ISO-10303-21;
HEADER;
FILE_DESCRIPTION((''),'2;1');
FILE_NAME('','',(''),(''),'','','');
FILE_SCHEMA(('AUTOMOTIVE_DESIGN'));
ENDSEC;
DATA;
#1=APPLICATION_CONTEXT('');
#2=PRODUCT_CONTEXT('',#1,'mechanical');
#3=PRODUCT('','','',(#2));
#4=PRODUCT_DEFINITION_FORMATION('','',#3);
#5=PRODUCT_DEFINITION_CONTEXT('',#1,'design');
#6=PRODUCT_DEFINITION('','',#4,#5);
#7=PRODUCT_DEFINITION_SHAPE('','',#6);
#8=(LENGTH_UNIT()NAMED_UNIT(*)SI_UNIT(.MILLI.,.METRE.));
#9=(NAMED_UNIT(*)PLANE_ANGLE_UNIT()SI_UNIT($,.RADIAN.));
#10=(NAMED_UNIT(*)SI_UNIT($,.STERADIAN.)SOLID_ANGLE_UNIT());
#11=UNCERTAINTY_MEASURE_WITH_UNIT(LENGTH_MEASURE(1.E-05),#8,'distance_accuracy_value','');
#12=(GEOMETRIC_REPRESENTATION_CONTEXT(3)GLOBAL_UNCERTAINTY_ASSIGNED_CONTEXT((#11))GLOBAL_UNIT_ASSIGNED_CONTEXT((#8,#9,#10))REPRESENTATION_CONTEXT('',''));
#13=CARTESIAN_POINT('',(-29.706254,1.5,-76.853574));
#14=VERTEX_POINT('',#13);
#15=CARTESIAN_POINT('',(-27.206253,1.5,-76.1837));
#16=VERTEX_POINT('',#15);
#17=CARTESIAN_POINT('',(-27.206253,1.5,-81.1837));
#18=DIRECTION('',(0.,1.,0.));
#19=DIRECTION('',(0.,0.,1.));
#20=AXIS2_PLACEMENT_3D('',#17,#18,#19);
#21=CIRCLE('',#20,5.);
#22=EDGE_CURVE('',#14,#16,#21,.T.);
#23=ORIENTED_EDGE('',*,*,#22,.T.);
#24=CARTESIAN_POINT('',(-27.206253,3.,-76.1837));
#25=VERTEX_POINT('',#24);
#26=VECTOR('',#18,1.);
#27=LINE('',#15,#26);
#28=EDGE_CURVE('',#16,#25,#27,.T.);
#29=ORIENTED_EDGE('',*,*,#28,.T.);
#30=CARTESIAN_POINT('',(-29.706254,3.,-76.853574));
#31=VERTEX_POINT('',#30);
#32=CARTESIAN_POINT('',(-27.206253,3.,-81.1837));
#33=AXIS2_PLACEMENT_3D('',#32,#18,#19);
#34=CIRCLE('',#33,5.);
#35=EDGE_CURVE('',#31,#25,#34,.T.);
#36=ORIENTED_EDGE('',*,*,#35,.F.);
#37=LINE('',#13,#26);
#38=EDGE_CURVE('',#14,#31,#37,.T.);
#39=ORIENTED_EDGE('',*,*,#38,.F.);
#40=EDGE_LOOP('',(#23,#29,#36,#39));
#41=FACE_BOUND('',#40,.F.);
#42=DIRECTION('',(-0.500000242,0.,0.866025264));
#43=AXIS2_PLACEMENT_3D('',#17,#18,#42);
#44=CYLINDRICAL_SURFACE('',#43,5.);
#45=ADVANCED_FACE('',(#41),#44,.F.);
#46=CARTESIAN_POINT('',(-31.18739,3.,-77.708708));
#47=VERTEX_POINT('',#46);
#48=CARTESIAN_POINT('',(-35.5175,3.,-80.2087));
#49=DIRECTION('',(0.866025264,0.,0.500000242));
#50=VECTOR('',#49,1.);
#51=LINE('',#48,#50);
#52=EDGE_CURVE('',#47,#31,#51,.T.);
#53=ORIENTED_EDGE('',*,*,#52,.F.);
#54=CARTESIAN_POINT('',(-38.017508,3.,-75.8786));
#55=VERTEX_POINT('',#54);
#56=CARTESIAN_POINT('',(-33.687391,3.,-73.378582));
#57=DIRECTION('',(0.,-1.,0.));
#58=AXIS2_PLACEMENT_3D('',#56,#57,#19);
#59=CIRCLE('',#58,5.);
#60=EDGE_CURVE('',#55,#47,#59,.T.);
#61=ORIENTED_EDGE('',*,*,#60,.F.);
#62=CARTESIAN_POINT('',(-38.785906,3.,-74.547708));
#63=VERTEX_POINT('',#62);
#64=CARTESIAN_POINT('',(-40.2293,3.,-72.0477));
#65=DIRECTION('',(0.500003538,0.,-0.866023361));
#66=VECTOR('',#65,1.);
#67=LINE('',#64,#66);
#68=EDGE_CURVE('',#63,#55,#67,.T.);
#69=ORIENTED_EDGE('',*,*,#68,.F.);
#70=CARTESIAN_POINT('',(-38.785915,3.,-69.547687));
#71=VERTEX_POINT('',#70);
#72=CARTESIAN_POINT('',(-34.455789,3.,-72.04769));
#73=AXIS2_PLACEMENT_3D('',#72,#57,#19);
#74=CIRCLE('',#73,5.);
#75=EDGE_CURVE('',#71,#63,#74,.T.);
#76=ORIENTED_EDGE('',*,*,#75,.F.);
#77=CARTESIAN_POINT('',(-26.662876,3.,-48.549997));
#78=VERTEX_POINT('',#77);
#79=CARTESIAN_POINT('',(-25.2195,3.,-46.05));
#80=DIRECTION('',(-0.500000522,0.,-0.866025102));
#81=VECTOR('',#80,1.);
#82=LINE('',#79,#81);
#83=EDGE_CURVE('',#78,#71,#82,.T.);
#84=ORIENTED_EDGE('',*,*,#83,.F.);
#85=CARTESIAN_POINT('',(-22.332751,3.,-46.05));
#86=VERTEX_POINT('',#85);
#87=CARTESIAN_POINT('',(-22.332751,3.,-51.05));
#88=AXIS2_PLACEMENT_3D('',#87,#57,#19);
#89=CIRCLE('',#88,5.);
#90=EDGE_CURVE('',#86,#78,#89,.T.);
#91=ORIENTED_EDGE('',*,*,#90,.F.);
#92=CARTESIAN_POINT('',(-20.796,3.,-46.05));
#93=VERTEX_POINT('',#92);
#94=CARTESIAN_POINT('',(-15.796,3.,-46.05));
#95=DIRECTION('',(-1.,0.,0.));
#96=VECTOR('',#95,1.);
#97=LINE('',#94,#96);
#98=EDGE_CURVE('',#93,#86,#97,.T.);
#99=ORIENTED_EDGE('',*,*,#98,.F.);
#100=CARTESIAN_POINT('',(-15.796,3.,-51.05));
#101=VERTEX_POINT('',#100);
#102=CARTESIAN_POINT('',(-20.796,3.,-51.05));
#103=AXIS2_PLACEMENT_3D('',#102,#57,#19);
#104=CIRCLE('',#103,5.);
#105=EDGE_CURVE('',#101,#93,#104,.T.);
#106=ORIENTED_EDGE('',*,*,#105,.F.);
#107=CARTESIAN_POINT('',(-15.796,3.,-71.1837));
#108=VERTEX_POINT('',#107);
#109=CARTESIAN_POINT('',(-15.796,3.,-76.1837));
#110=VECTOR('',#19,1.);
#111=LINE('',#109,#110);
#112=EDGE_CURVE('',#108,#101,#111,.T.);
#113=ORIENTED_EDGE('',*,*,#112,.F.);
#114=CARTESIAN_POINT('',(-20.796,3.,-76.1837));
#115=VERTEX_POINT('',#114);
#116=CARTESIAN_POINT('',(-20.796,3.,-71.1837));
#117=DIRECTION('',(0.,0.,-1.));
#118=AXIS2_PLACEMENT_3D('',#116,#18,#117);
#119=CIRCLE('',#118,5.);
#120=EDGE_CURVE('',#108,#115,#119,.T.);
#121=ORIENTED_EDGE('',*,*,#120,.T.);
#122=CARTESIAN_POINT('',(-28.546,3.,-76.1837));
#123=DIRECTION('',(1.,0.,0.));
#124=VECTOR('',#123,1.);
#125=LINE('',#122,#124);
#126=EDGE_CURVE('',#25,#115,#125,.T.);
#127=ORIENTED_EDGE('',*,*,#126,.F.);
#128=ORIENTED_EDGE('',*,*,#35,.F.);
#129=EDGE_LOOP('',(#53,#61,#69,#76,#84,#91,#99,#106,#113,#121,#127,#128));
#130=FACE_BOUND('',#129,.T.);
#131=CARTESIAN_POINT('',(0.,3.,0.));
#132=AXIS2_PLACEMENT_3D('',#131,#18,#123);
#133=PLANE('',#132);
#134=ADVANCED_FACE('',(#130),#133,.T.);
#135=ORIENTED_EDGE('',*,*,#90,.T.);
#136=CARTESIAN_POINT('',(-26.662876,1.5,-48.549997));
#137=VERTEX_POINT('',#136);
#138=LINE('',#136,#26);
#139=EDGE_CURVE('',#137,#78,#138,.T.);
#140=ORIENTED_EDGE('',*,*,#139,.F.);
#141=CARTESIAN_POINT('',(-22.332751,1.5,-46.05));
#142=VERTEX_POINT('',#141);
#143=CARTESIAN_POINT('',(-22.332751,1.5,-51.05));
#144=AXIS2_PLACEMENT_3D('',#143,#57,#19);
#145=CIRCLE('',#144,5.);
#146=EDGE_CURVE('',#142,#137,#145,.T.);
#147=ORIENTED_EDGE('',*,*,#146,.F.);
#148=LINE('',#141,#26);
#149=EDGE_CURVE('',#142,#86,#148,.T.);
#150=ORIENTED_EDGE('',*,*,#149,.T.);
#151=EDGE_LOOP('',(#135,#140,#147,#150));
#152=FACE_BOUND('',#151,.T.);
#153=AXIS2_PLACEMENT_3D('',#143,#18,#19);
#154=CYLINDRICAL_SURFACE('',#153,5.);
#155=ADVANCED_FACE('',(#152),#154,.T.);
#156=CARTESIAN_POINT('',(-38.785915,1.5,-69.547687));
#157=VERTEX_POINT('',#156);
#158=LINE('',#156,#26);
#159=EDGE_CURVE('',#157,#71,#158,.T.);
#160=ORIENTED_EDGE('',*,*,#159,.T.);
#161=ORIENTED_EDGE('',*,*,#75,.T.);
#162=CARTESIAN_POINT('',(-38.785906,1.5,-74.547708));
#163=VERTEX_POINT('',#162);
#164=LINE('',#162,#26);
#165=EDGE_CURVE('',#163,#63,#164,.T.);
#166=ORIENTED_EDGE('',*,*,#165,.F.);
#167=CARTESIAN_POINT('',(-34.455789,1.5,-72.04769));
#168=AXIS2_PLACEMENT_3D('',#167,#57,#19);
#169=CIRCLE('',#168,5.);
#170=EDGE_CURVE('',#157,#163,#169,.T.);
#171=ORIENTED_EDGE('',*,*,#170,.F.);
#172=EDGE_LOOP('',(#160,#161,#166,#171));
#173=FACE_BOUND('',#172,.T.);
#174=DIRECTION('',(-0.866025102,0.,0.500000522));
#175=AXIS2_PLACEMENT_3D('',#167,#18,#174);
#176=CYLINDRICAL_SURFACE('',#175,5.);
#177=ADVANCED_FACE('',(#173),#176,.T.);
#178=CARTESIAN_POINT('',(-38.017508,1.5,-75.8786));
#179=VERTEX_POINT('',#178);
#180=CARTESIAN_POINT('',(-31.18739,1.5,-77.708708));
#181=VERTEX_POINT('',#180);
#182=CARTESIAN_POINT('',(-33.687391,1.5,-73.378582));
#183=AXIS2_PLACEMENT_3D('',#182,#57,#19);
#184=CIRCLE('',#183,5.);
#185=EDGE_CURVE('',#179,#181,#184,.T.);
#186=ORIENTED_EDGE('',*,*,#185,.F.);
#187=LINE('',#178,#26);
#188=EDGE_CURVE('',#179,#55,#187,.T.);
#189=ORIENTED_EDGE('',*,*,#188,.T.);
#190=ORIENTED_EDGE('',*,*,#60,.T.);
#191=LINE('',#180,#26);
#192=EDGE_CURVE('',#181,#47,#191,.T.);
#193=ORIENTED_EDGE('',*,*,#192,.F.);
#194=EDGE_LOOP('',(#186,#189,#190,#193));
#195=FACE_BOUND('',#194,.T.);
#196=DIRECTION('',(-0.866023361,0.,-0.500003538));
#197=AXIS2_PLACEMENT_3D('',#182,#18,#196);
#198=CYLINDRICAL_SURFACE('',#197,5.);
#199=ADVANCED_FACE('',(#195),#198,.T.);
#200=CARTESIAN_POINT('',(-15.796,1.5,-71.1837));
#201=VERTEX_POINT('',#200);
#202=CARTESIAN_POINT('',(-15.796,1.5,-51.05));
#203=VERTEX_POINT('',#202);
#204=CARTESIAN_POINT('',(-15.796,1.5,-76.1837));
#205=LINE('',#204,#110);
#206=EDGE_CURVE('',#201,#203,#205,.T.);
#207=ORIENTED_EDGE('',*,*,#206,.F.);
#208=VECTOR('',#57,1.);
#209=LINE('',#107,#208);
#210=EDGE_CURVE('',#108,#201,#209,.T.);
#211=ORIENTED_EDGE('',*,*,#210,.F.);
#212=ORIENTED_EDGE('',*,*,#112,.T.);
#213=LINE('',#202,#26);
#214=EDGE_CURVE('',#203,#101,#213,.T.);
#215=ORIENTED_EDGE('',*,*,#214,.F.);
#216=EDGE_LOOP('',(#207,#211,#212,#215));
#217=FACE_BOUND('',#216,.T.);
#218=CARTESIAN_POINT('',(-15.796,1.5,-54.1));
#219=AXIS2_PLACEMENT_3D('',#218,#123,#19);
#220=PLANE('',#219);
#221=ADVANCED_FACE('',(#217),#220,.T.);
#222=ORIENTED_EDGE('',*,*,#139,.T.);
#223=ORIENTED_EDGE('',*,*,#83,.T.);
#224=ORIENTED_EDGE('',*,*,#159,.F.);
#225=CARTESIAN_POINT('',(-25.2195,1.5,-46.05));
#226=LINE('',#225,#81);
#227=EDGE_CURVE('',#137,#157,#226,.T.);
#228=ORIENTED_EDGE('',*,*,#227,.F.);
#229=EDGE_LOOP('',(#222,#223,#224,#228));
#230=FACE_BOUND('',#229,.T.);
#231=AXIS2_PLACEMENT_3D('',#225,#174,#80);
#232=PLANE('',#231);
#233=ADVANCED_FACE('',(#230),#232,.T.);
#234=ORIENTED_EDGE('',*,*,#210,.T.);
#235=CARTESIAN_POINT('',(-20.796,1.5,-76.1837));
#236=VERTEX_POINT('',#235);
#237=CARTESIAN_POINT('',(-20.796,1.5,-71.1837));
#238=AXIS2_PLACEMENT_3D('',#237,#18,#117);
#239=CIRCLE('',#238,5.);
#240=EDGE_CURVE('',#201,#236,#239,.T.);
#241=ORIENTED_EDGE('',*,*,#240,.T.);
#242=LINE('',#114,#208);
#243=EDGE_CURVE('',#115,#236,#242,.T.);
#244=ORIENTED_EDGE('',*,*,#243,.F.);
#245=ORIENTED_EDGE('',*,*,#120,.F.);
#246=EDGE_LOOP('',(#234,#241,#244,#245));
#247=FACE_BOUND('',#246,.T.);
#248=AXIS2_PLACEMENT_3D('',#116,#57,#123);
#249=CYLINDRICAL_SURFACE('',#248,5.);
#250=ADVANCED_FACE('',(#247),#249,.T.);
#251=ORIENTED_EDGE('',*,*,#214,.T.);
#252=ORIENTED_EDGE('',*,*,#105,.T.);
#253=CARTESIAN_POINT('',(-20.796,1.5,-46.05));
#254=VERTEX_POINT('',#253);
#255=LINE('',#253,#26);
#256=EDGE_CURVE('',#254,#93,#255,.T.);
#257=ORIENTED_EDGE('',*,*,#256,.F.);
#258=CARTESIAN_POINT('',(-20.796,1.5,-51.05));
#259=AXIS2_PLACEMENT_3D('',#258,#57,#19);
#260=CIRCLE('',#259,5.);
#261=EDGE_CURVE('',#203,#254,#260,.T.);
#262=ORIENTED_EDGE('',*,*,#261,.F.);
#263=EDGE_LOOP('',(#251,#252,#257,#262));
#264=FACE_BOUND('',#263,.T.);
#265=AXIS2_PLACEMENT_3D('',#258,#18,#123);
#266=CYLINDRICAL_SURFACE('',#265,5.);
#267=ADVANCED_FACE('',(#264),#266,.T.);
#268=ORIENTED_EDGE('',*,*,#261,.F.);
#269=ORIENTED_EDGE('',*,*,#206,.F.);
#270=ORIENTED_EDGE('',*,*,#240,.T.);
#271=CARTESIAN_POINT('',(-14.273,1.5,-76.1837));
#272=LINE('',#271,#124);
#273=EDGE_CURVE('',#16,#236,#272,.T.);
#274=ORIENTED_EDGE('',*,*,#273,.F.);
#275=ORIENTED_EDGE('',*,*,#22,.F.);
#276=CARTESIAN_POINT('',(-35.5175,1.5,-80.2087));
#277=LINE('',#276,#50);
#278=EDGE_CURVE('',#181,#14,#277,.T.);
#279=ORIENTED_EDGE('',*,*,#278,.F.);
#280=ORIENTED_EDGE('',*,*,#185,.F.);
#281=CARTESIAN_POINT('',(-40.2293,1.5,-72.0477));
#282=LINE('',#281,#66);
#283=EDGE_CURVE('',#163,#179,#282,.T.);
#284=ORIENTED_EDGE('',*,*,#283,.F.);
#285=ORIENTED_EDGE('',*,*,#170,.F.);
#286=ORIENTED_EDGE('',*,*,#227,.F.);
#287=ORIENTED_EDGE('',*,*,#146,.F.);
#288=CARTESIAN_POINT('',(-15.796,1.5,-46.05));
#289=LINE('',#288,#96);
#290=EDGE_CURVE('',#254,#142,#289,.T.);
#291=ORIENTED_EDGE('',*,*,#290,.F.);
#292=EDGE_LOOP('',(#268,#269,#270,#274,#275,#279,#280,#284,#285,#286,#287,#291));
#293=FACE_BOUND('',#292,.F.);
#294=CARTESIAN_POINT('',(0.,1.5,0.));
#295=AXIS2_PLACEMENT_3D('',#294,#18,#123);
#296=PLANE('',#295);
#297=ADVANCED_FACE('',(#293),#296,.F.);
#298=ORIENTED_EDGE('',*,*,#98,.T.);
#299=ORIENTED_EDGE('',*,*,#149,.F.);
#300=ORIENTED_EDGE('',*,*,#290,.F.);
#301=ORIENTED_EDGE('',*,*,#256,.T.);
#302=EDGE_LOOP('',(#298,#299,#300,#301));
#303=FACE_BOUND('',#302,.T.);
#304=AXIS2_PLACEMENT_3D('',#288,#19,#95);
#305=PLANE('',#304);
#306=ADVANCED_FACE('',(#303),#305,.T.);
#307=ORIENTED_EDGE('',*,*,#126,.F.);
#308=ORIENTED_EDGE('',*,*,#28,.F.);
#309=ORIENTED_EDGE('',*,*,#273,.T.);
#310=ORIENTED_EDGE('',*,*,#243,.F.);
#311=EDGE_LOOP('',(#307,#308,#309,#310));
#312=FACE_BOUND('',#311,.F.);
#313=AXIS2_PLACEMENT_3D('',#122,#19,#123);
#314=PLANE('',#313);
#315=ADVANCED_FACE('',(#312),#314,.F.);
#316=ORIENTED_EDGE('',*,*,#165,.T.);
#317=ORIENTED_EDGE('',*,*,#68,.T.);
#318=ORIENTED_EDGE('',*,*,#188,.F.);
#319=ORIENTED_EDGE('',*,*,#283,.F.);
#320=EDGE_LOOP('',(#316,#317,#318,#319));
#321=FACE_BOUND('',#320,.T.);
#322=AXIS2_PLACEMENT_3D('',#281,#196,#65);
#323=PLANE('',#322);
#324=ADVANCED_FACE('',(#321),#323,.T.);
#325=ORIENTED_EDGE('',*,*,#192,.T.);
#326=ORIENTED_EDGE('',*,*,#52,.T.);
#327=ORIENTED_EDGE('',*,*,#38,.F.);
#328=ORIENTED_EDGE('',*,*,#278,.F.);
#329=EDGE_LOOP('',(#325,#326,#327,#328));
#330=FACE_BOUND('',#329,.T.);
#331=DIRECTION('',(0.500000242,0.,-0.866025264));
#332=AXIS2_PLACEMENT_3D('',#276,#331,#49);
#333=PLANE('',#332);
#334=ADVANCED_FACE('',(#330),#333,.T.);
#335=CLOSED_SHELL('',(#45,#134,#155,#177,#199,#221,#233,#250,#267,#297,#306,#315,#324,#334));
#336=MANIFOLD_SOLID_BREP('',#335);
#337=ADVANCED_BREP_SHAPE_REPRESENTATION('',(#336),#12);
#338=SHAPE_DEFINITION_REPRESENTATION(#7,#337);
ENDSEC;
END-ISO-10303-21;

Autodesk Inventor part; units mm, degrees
ref_plane "YZ Plane" through (0, 0, 0) normal (1, 0, 0) x (0, 1, 0)
ref_plane "XZ Plane" through (0, 0, 0) normal (0, 1, 0) x (-1, 0, 0)
ref_plane "XY Plane" through (0, 0, 0) normal (0, 0, 1) x (1, 0, 0)
sketch "スケッチ1" plane through (0, 0, 0) normal (0, 1, 0) x (-1, 0, 0)
  line L0 (75, 0) -> (105, -51.9615)
  line L1 (-75, 0) -> (-105, -51.9615)
  line L2 (0, -218.2384) -> (0, 36.3731)
  line L3 (147, 0) -> (-147, 0)
  line L4 (37.5, -27) -> (-37.5, -27)
  line L5 (105, -51.9615) -> (30, -181.8653)
  line L6 (30, -181.8653) -> (-30, -181.8653)
  line L7 (-30, -181.8653) -> (-105, -51.9615)
  line L8 (75, 0) -> (-75, 0)
  line L9 (-25.3673, -135.8894) -> (-62.8673, -70.9375)
  line L10 (25.3673, -135.8894) -> (62.8673, -70.9375)
  line L11 (-37.5, -27) -> (-27.5, -27)
  line L12 (-27.5, -27) -> (-27.5, -39)
  line L13 (-27.5, -39) -> (-37.5, -39)
  line L14 (-37.5, -39) -> (-37.5, -27)
  line L15 (37.5, -27) -> (27.5, -27)
  line L16 (27.5, -27) -> (27.5, -39)
  line L17 (27.5, -39) -> (37.5, -39)
  line L18 (37.5, -39) -> (37.5, -27)
  line L19 (0, -77.9423) -> (44.1173, -103.4134) construction
  line L20 (0, -77.9423) -> (-44.1173, -103.4134) construction
  line L21 (-44.1173, -103.4134) -> (-67.5, -116.9134) construction
  line L22 (-57.8673, -79.5977) -> (-47.475, -73.5977)
  line L23 (-52.475, -64.9375) -> (-62.8673, -70.9375)
  line L24 (-62.8673, -70.9375) -> (-57.8673, -79.5977)
  line L25 (-47.475, -73.5977) -> (-52.475, -64.9375)
  line L26 (-25.3673, -135.8894) -> (-30.3673, -127.2291)
  line L27 (-19.975, -121.2291) -> (-14.975, -129.8894)
  line L28 (-14.975, -129.8894) -> (-25.3673, -135.8894)
  line L29 (-30.3673, -127.2291) -> (-19.975, -121.2291)
  line L30 (30.3673, -127.2291) -> (19.975, -121.2291)
  line L31 (14.975, -129.8894) -> (25.3673, -135.8894)
  line L32 (25.3673, -135.8894) -> (30.3673, -127.2291)
  line L33 (19.975, -121.2291) -> (14.975, -129.8894)
  line L34 (62.8673, -70.9375) -> (57.8673, -79.5977)
  line L35 (47.475, -73.5977) -> (52.475, -64.9375)
  line L36 (52.475, -64.9375) -> (62.8673, -70.9375)
  line L37 (57.8673, -79.5977) -> (47.475, -73.5977)
  line L38 (62.8673, -70.9375) -> (37.5, -27)
  line L39 (-37.5, -27) -> (-62.8673, -70.9375)
  line L40 (-25.3673, -135.8894) -> (25.3673, -135.8894)
  line L41 (-25.3673, -135.8894) -> (-25.3673, -181.8653)
  line L42 (25.3673, -135.8894) -> (25.3673, -181.8653)
  line L43 (-25.3673, -135.8894) -> (-48.75, -149.3894)
  line L44 (25.3673, -135.8894) -> (48.75, -149.3894)
  point P0 (0, 0)
  point P1 (0, 0)
  point P2 (0, -27)
  dimension "d1" = 150
  dimension "d2" = 60
  dimension "d3" = 60
  dimension "d4" = 27
  dimension "d5" = 75
  dimension "d6" = 60
  dimension "d7" = 27
  dimension "d8" = 10
  dimension "d9" = 12
  dimension "d10" = 10
  dimension "d11" = 12
  dimension "d14" = 360
extrude "プレート1" add sketch "スケッチ1" along normal blind 1.5 contours L5 L6 L42 L44 | L4 L16 L17 L18 L38 L36 L35 L37 L10 L30 L33 L31 L40 L2 | L2 L40 L28 L27 L29 L9 L22 L25 L23 L39 L14 L13 L12 L4 | L31 L33 L30 L10 | L42 L6 L2 L40 | L2 L6 L41 L40 | L4 L18 L17 L16 | L12 L13 L14 L4 | L9 L29 L27 L28 | L41 L6 L7 L43 | L37 L35 L36 L10 | L23 L25 L22 L9
sketch "スケッチ2" plane through (0, 0, 0) normal (0, -1, 0) x (1, 0, 0)
  line L0 (23.3798, -38.55) -> (-23.3798, -38.55) projected
  line L1 (8.2, -46.6) -> (-8.2, -46.6) projected
  arc A0 (-21.1, -27) -> (-23.3798, -38.55) centre (-21.1, -33) ccw projected
  line L2 (-27.5, -27) -> (-27.5, -39) projected
  line L3 (27.5, -39) -> (27.5, -27) projected
  line L4 (-27.5, -39) -> (-27.5, -40.55)
  line L5 (-27.5, -40.55) -> (-10.2, -40.55)
  line L6 (-10.2, -40.55) -> (-10.2, -48.6)
  line L7 (-10.2, -48.6) -> (10.2, -48.6)
  line L8 (10.2, -48.6) -> (10.2, -40.55)
  line L9 (10.2, -40.55) -> (27.5, -40.55)
  line L10 (27.5, -40.55) -> (27.5, -39)
  line L11 (-37.5, -27) -> (-27.5, -27) projected
  line L12 (-37.5, -27) -> (37.5, -27) projected
  line L13 (-20.3112, -101.4469) -> (-30.5112, -83.78)
  line L14 (-27.2827, -105.4719) -> (-20.3112, -101.4469)
  line L15 (-18.6327, -120.4541) -> (-27.2827, -105.4719)
  line L16 (-19.975, -121.2291) -> (-18.6327, -120.4541)
  line L17 (-37.4827, -87.805) -> (-46.1327, -72.8227)
  line L18 (-46.1327, -72.8227) -> (-47.475, -73.5977)
  line L19 (-30.5112, -83.78) -> (-37.4827, -87.805)
  line L20 (30.5112, -83.78) -> (20.3112, -101.4469)
  line L21 (37.4827, -87.805) -> (30.5112, -83.78)
  line L22 (46.1327, -72.8227) -> (37.4827, -87.805)
  line L23 (47.475, -73.5977) -> (46.1327, -72.8227)
  line L24 (27.2827, -105.4719) -> (18.6327, -120.4541)
  line L25 (18.6327, -120.4541) -> (19.975, -121.2291)
  line L26 (20.3112, -101.4469) -> (27.2827, -105.4719)
  line L27 (-47.475, -73.5977) -> (-57.8673, -79.5977)
  line L28 (-57.8673, -79.5977) -> (-30.3673, -127.2291)
  line L29 (-30.3673, -127.2291) -> (-19.975, -121.2291)
  line L30 (19.975, -121.2291) -> (30.3673, -127.2291)
  line L31 (30.3673, -127.2291) -> (57.8673, -79.5977)
  line L32 (57.8673, -79.5977) -> (47.475, -73.5977)
  point P0 (0, 0)
  point P1 (0, -77.9423)
  point P2 (-23.0432, -100.7148)
  point P3 (-33.5673, -121.6866)
  point P4 (-22.4248, -117.8859)
  point P5 (-25.3673, -135.8894)
  point P6 (-28.3712, -118.6866)
  point P7 (-31.2432, -86.512)
  point P8 (-45.8046, -77.3909)
  point P9 (-62.8673, -70.9375)
  point P10 (31.2432, -86.512)
  point P11 (54.6673, -85.1403)
  point P12 (45.8046, -77.3909)
  point P13 (62.8673, -70.9375)
  point P14 (49.4712, -82.1403)
  point P15 (23.0432, -100.7148)
  point P16 (22.4248, -117.8859)
  point P17 (25.3673, -135.8894)
  dimension "d17" = 2
  dimension "d18" = 2
  dimension "d19" = 2
  dimension "d20" = 2
  dimension "d26" = 360
extrude "切り取り1" cut sketch "スケッチ2" against normal blind 1.5
fillet "フィレット1" radius 1.5 18 edges at (-10.2, 0.75, -48.6) (-10.2, 0.75, -40.55) (-27.5, 0.75, -40.55) (10.2, 0.75, -48.6) (10.2, 0.75, -40.55) (27.5, 0.75, -40.55) (-30.5112, 0.75, -83.78) (-46.1327, 0.75, -72.8227) (-20.3112, 0.75, -101.4469) (-27.2827, 0.75, -105.4719) (-37.4827, 0.75, -87.805) (-18.6327, 0.75, -120.4541) (20.3112, 0.75, -101.4469) (27.2827, 0.75, -105.4719) (18.6327, 0.75, -120.4541) (30.5112, 0.75, -83.78) (37.4827, 0.75, -87.805) (46.1327, 0.75, -72.8227)
sketch "スケッチ3" plane through (0, 0, 0) normal (0, -1, 0) x (1, 0, 0)
  circle A0 centre (40.9875, -45.0405) radius 1.6 projected
  circle A1 centre (48.9875, -58.8969) radius 1.6 projected
  circle A2 centre (8, -129.8894) radius 1.6 projected
  circle A3 centre (-8, -129.8894) radius 1.6 projected
  circle A4 centre (-48.9875, -58.8969) radius 1.6 projected
  circle A5 centre (-40.9875, -45.0405) radius 1.6 projected
  point P0 (0, 0)
extrude "切り取り2" cut sketch "スケッチ3" against normal blind 1.5
sketch "スケッチ4" plane through (0, 0, 0) normal (0, -1, 0) x (1, 0, 0)
  circle A0 centre (10, -176.8653) radius 1.35 projected
  circle A1 centre (21.2333, -145.0496) radius 1.6 projected
  circle A2 centre (10, -143.8894) radius 1.6 projected
  line L0 (52.75, -142.4612) -> (30, -181.8653) projected
  line L1 (52.75, -142.4612) -> (33.6974, -131.4612) projected
  line L2 (33.6974, -131.4612) -> (27.1974, -142.7195) projected
  line L3 (27.1974, -142.7195) -> (20.5635, -138.8894) projected
  line L4 (20.5635, -138.8894) -> (5, -138.8894) projected
  line L5 (5, -138.8894) -> (5, -181.8653) projected
  line L6 (30, -181.8653) -> (5, -181.8653) projected
  circle A3 centre (-10, -176.8653) radius 1.35 projected
  circle A4 centre (-21.2333, -145.0496) radius 1.6 projected
  circle A5 centre (-10, -143.8894) radius 1.6 projected
  line L7 (-12.9295, -171.4323) -> (-35.4295, -132.4612) projected
  line L8 (-30.25, -181.4323) -> (-12.9295, -171.4323) projected
  line L9 (-30, -181.8653) -> (-30.25, -181.4323) projected
  line L10 (-30, -181.8653) -> (-5, -181.8653) projected
  line L11 (-5, -181.8653) -> (-5, -138.8894) projected
  line L12 (-5, -138.8894) -> (-20.5635, -138.8894) projected
  line L13 (-20.5635, -138.8894) -> (-27.1974, -142.7195) projected
  line L14 (-33.6974, -131.4612) -> (-27.1974, -142.7195) projected
  line L15 (-35.4295, -132.4612) -> (-33.6974, -131.4612) projected
  point P0 (0, 0)
extrude "切り取り3" cut sketch "スケッチ4" against normal blind 1.5 contours A0 | A1 | A2 | A3 | A4 | A5
sketch "スケッチ5" plane through (0, 1.5, 0) normal (0, 1, 0) x (1, 0, 0)
  line L0 (-19.975, 121.2291) -> (19.975, 121.2291) projected
  line L1 (47.475, 73.5977) -> (27.5, 39) projected
  line L2 (-47.475, 73.5977) -> (-27.5, 39) projected
  point P0 (0, 0)
sketch "スケッチ6" plane through (0, 1.5, 0) normal (0, 1, 0) x (1, 0, 0)
  line L0 (-26.0855, 44.55) -> (-41.9613, 72.0477)
  line L1 (-41.9613, 72.0477) -> (-36.0186, 82.3409)
  line L2 (-36.0186, 82.3409) -> (-29.0471, 78.3159)
  line L3 (-29.0471, 78.3159) -> (-14.8471, 102.911)
  line L4 (-14.8471, 102.911) -> (-21.8186, 106.936)
  line L5 (-21.8186, 106.936) -> (-15.8758, 117.2291)
  line L6 (-15.8758, 117.2291) -> (15.8758, 117.2291)
  line L7 (15.8758, 117.2291) -> (21.8186, 106.936)
  line L8 (21.8186, 106.936) -> (14.8471, 102.911)
  line L9 (14.8471, 102.911) -> (29.0471, 78.3159)
  line L10 (29.0471, 78.3159) -> (36.0186, 82.3409)
  line L11 (36.0186, 82.3409) -> (41.9613, 72.0477)
  line L12 (41.9613, 72.0477) -> (26.0855, 44.55)
  line L13 (26.0855, 44.55) -> (14.2, 44.55)
  line L14 (14.2, 44.55) -> (14.2, 52.6)
  line L15 (14.2, 52.6) -> (-14.2, 52.6)
  line L16 (-14.2, 52.6) -> (-14.2, 44.55)
  line L17 (-14.2, 44.55) -> (-26.0855, 44.55)
  line L18 (-47.475, 73.5977) -> (-27.5, 39) projected
  line L19 (-38.2327, 86.5059) -> (-45.3827, 74.1218) projected
  line L20 (-31.8102, 84.53) -> (-36.1836, 87.055) projected
  line L21 (-21.0612, 100.1479) -> (-29.7612, 85.079) projected
  line L22 (-25.9836, 104.7219) -> (-21.6102, 102.1969) projected
  line L23 (-19.3827, 119.1551) -> (-26.5327, 106.7709) projected
  line L24 (-19.975, 121.2291) -> (19.975, 121.2291) projected
  line L25 (47.475, 73.5977) -> (27.5, 39) projected
  line L26 (26.5327, 106.7709) -> (19.3827, 119.1551) projected
  line L27 (21.6102, 102.1969) -> (25.9836, 104.7219) projected
  line L28 (29.7612, 85.079) -> (21.0612, 100.1479) projected
  line L29 (36.1836, 87.055) -> (31.8102, 84.53) projected
  line L30 (45.3827, 74.1218) -> (38.2327, 86.5059) projected
  line L31 (11.7, 40.55) -> (26, 40.55) projected
  line L32 (10.2, 47.1) -> (10.2, 42.05) projected
  line L33 (-8.7, 48.6) -> (8.7, 48.6) projected
  line L34 (-10.2, 42.05) -> (-10.2, 47.1) projected
  line L35 (-26, 40.55) -> (-11.7, 40.55) projected
  line L36 (0, 48.6) -> (0, 121.2291)
  line L37 (-25.4112, 92.6134) -> (-31.0836, 95.8884) construction
  point P0 (0, 0)
  dimension "d32" = 4
  dimension "d33" = 4
  dimension "d34" = 4
  dimension "d35" = 4
  dimension "d36" = 4
  dimension "d37" = 4
  dimension "d38" = 4
  dimension "d39" = 4
  dimension "d40" = 4
extrude "切り取り4" cut sketch "スケッチ6" against normal blind 1.5
fillet "フィレット2" radius 5 9 edges at (-14.2, 0.75, -44.55) (-26.0855, 0.75, -44.55) (-41.9613, 0.75, -72.0477) (-36.0186, 0.75, -82.3409) (-21.8186, 0.75, -106.936) (-15.8758, 0.75, -117.2291) (-14.2, 0.75, -52.6) (-29.0471, 0.75, -78.3159) (-14.8471, 0.75, -102.911)
mirror "ミラー1" about plane through (0, 0, 0) normal (1, 0, 0) of "フィレット2"
sketch "スケッチ7" plane through (0, 1.5, 0) normal (0, 1, 0) x (1, 0, 0)
  arc A0 (18.2848, 105.0066) -> (17.2511, 98.7471) centre (21.5812, 101.2471) ccw projected
  line L0 (17.2511, 98.7471) -> (26.643, 82.4797) projected
  arc A1 (26.643, 82.4797) -> (32.5808, 80.2452) centre (30.9732, 84.9797) ccw projected
  arc A2 (38.5186, 78.0107) -> (32.5808, 80.2452) centre (34.1884, 75.5107) ccw projected
  line L1 (38.5186, 78.0107) -> (40.5179, 74.5477) projected
  arc A3 (40.5179, 69.5477) -> (40.5179, 74.5477) centre (36.1878, 72.0477) ccw projected
  line L2 (40.5179, 69.5477) -> (27.5289, 47.05) projected
  arc A4 (23.1987, 44.55) -> (27.5289, 47.05) centre (23.1987, 49.55) ccw projected
  line L3 (23.1987, 44.55) -> (19.2, 44.55) projected
  arc A5 (14.296, 48.575) -> (19.2, 44.55) centre (19.2, 49.55) ccw projected
  arc A6 (14.296, 48.575) -> (9.392, 52.6) centre (9.392, 47.6) ccw projected
  line L4 (9.392, 52.6) -> (-9.392, 52.6) projected
  arc A7 (-9.392, 52.6) -> (-14.296, 48.575) centre (-9.392, 47.6) ccw projected
  arc A8 (-19.2, 44.55) -> (-14.296, 48.575) centre (-19.2, 49.55) ccw projected
  line L5 (-19.2, 44.55) -> (-23.1987, 44.55) projected
  arc A9 (-27.5289, 47.05) -> (-23.1987, 44.55) centre (-23.1987, 49.55) ccw projected
  line L6 (-27.5289, 47.05) -> (-40.5179, 69.5477) projected
  arc A10 (-40.5179, 74.5477) -> (-40.5179, 69.5477) centre (-36.1878, 72.0477) ccw projected
  line L7 (-40.5179, 74.5477) -> (-38.5186, 78.0107) projected
  arc A11 (-32.5808, 80.2452) -> (-38.5186, 78.0107) centre (-34.1884, 75.5107) ccw projected
  arc A12 (-32.5808, 80.2452) -> (-26.643, 82.4797) centre (-30.9732, 84.9797) ccw projected
  line L8 (-26.643, 82.4797) -> (-17.2511, 98.7471) projected
  arc A13 (-17.2511, 98.7471) -> (-18.2848, 105.0066) centre (-21.5812, 101.2471) ccw projected
  arc A14 (-19.3186, 111.2661) -> (-18.2848, 105.0066) centre (-14.9884, 108.7661) ccw projected
  line L9 (-19.3186, 111.2661) -> (-17.3192, 114.7291) projected
  arc A15 (-12.9891, 117.2291) -> (-17.3192, 114.7291) centre (-12.9891, 112.2291) ccw projected
  line L10 (-12.9891, 117.2291) -> (12.9891, 117.2291) projected
  arc A16 (17.3192, 114.7291) -> (12.9891, 117.2291) centre (12.9891, 112.2291) ccw projected
  line L11 (17.3192, 114.7291) -> (19.3186, 111.2661) projected
  arc A17 (18.2848, 105.0066) -> (19.3186, 111.2661) centre (14.9884, 108.7661) ccw projected
  circle A18 centre (21.2333, 145.0496) radius 1.6 projected
  circle A19 centre (-10, 143.8894) radius 1.6 projected
  circle A20 centre (-10, 176.8653) radius 1.35 projected
  circle A21 centre (-21.2333, 145.0496) radius 1.6 projected
  circle A22 centre (10, 176.8653) radius 1.35 projected
  circle A23 centre (10, 143.8894) radius 1.6 projected
  circle A24 centre (-48.9875, 58.8969) radius 1.6 projected
  circle A25 centre (8, 129.8894) radius 1.6 projected
  circle A26 centre (40.9875, 45.0405) radius 1.6 projected
  circle A27 centre (48.9875, 58.8969) radius 1.6 projected
  circle A28 centre (-8, 129.8894) radius 1.6 projected
  circle A29 centre (-40.9875, 45.0405) radius 1.6 projected
  arc A30 (38.2327, 86.5059) -> (36.1836, 87.055) centre (36.9336, 85.7559) ccw projected
  line L12 (36.1836, 87.055) -> (31.8102, 84.53) projected
  arc A31 (29.7612, 85.079) -> (31.8102, 84.53) centre (31.0602, 85.829) ccw projected
  line L13 (29.7612, 85.079) -> (21.0612, 100.1479) projected
  arc A32 (21.6102, 102.1969) -> (21.0612, 100.1479) centre (22.3602, 100.8979) ccw projected
  line L14 (21.6102, 102.1969) -> (25.9836, 104.7219) projected
  arc A33 (25.9836, 104.7219) -> (26.5327, 106.7709) centre (25.2336, 106.0209) ccw projected
  line L15 (26.5327, 106.7709) -> (19.3827, 119.1551) projected
  arc A34 (19.9317, 121.2041) -> (19.3827, 119.1551) centre (20.6817, 119.9051) ccw projected
  line L16 (19.9317, 121.2041) -> (30.3673, 127.2291) projected
  line L17 (25.3673, 135.8894) -> (30.3673, 127.2291) projected
  line L18 (48.75, 149.3894) -> (25.3673, 135.8894) projected
  line L19 (30, 181.8653) -> (48.75, 149.3894) projected
  line L20 (-30, 181.8653) -> (30, 181.8653) projected
  line L21 (-48.75, 149.3894) -> (-30, 181.8653) projected
  line L22 (-25.3673, 135.8894) -> (-48.75, 149.3894) projected
  line L23 (-30.3673, 127.2291) -> (-25.3673, 135.8894) projected
  line L24 (-30.3673, 127.2291) -> (-19.9317, 121.2041) projected
  arc A35 (-19.3827, 119.1551) -> (-19.9317, 121.2041) centre (-20.6817, 119.9051) ccw projected
  line L25 (-19.3827, 119.1551) -> (-26.5327, 106.7709) projected
  arc A36 (-26.5327, 106.7709) -> (-25.9836, 104.7219) centre (-25.2336, 106.0209) ccw projected
  line L26 (-25.9836, 104.7219) -> (-21.6102, 102.1969) projected
  arc A37 (-21.0612, 100.1479) -> (-21.6102, 102.1969) centre (-22.3602, 100.8979) ccw projected
  line L27 (-21.0612, 100.1479) -> (-29.7612, 85.079) projected
  arc A38 (-31.8102, 84.53) -> (-29.7612, 85.079) centre (-31.0602, 85.829) ccw projected
  line L28 (-31.8102, 84.53) -> (-36.1836, 87.055) projected
  arc A39 (-36.1836, 87.055) -> (-38.2327, 86.5059) centre (-36.9336, 85.7559) ccw projected
  line L29 (-38.2327, 86.5059) -> (-45.3827, 74.1218) projected
  arc A40 (-47.4317, 73.5727) -> (-45.3827, 74.1218) centre (-46.6817, 74.8718) ccw projected
  line L30 (-47.4317, 73.5727) -> (-57.8673, 79.5977) projected
  line L31 (-62.8673, 70.9375) -> (-57.8673, 79.5977) projected
  line L32 (-37.5, 27) -> (-62.8673, 70.9375) projected
  line L33 (-27.5, 27) -> (-37.5, 27) projected
  line L34 (-27.5, 27) -> (-27.5, 39.05) projected
  arc A41 (-26, 40.55) -> (-27.5, 39.05) centre (-26, 39.05) ccw projected
  line L35 (-26, 40.55) -> (-11.7, 40.55) projected
  arc A42 (-11.7, 40.55) -> (-10.2, 42.05) centre (-11.7, 42.05) ccw projected
  line L36 (-10.2, 42.05) -> (-10.2, 47.1) projected
  arc A43 (-8.7, 48.6) -> (-10.2, 47.1) centre (-8.7, 47.1) ccw projected
  line L37 (-8.7, 48.6) -> (8.7, 48.6) projected
  arc A44 (10.2, 47.1) -> (8.7, 48.6) centre (8.7, 47.1) ccw projected
  line L38 (10.2, 47.1) -> (10.2, 42.05) projected
  arc A45 (10.2, 42.05) -> (11.7, 40.55) centre (11.7, 42.05) ccw projected
  line L39 (11.7, 40.55) -> (26, 40.55) projected
  arc A46 (27.5, 39.05) -> (26, 40.55) centre (26, 39.05) ccw projected
  line L40 (27.5, 39.05) -> (27.5, 27) projected
  line L41 (37.5, 27) -> (27.5, 27) projected
  line L42 (62.8673, 70.9375) -> (37.5, 27) projected
  line L43 (57.8673, 79.5977) -> (62.8673, 70.9375) projected
  line L44 (57.8673, 79.5977) -> (47.4317, 73.5727) projected
  arc A47 (45.3827, 74.1218) -> (47.4317, 73.5727) centre (46.6817, 74.8718) ccw projected
  line L45 (45.3827, 74.1218) -> (38.2327, 86.5059) projected
  line L46 (25.2195, 46.05) -> (15.796, 46.05)
  line L47 (15.796, 46.05) -> (15.796, 54.1)
  line L48 (15.796, 54.1) -> (-15.796, 54.1)
  line L49 (-15.796, 54.1) -> (-15.796, 46.05)
  line L50 (-15.796, 46.05) -> (-25.2195, 46.05)
  line L51 (-25.2195, 46.05) -> (-40.2293, 72.0477)
  line L52 (-40.2293, 72.0477) -> (-35.5175, 80.2087)
  line L53 (-35.5175, 80.2087) -> (-28.546, 76.1837)
  line L54 (-28.546, 76.1837) -> (-12.75, 103.5432)
  line L55 (-12.75, 103.5432) -> (-19.7215, 107.5682)
  line L56 (-19.7215, 107.5682) -> (-15.0098, 115.7291)
  line L57 (-15.0098, 115.7291) -> (15.0098, 115.7291)
  line L58 (15.0098, 115.7291) -> (19.7215, 107.5682)
  line L59 (19.7215, 107.5682) -> (12.75, 103.5432)
  line L60 (12.75, 103.5432) -> (28.546, 76.1837)
  line L61 (28.546, 76.1837) -> (35.5175, 80.2087)
  line L62 (35.5175, 80.2087) -> (40.2293, 72.0477)
  line L63 (40.2293, 72.0477) -> (25.2195, 46.05)
  line L64 (0, 54.1) -> (0, 115.7291) construction
  line L65 (0, 218.2384) -> (0, -36.3731) construction
  line L66 (40.5179, 69.5477) -> (27.5289, 47.05) projected
  line L67 (20.648, 89.8634) -> (0, 77.9423) construction
  line L68 (0, 54.1) -> (0, 77.9423) construction
  line L69 (17.3192, 114.7291) -> (19.3186, 111.2661) projected
  point P0 (0, 0)
  dimension "d44" = 1.5
  dimension "d45" = 1.5
  dimension "d46" = 1.5
  dimension "d47" = 1.5
  dimension "d48" = 1.5
  dimension "d49" = 1.5
  dimension "d50" = 1.5
  dimension "d51" = 1.5
extrude "押し出し1" cut sketch "スケッチ7" against normal through all contours A0 L0 A1 A2 L1 A3 L2 A4 L3 A5 A6 L4 A7 A8 L5 A9 L6 A10 L7 A11 A12 L8 A13 A14 L9 A15 L10 A16 L11 A17 | L45 A47 L44 L43 L42 L41 L40 A46 L39 A45 L38 A44 L37 A43 L36 A42 L35 A41 L34 L33 L32 L31 L30 A40 L29 A39 L28 A38 L27 A37 L26 A36 L25 A35 L24 L23 L22 L21 L20 L19 L18 L17 L16 A34 L15 A33 L14 A32 L13 A31 L12 A30 | L46 L47 L48 L49 L50 L51 L52 L53 L54 L55 L56 L57 L58 L59 L60 L61 L62 L63
extrude "押し出し2" add sketch "スケッチ7" along normal blind 1.5 contours L46 L47 L48 L49 L50 L51 L52 L53 L54 L55 L56 L57 L58 L59 L60 L61 L62 L63
sketch "スケッチ8" plane through (0, 3, 0) normal (0, 1, 0) x (1, 0, 0)
  line L0 (15, 59.1) -> (-15, 59.1)
  line L1 (-15, 59.1) -> (-15, 124.1)
  line L2 (-15, 124.1) -> (15, 124.1)
  line L3 (15, 124.1) -> (15, 59.1)
  line L4 (-15.796, 54.1) -> (15.796, 54.1) projected
  line L5 (15.0098, 115.7291) -> (-15.0098, 115.7291) projected
  line L6 (15, 59.1) -> (15, 54.1)
  line L7 (-15.796, 46.05) -> (-15.796, 54.1) projected
  line L8 (-25.2195, 46.05) -> (-15.796, 46.05) projected
  line L9 (-40.2293, 72.0477) -> (-25.2195, 46.05) projected
  line L10 (-35.5175, 80.2087) -> (-40.2293, 72.0477) projected
  line L11 (-28.546, 76.1837) -> (-35.5175, 80.2087) projected
  line L12 (-12.75, 103.5432) -> (-28.546, 76.1837) projected
  line L13 (-19.7215, 107.5682) -> (-12.75, 103.5432) projected
  line L14 (-15.0098, 115.7291) -> (-19.7215, 107.5682) projected
  line L15 (15.796, 54.1) -> (15.796, 114.3674)
  line L16 (19.7215, 107.5682) -> (15.0098, 115.7291) projected
  line L17 (12.75, 103.5432) -> (19.7215, 107.5682) projected
  line L18 (-15.796, 54.1) -> (-15.796, 98.2674)
  line L19 (40.2293, 72.0477) -> (35.5175, 80.2087) projected
  line L20 (35.5175, 80.2087) -> (28.546, 76.1837) projected
  line L21 (28.546, 76.1837) -> (12.75, 103.5432) projected
  line L22 (12.75, 103.5432) -> (19.7215, 107.5682) projected
  line L23 (19.7215, 107.5682) -> (15.0098, 115.7291) projected
  line L24 (15.0098, 115.7291) -> (-15.0098, 115.7291) projected
  line L25 (-15.0098, 115.7291) -> (-19.7215, 107.5682) projected
  line L26 (-19.7215, 107.5682) -> (-12.75, 103.5432) projected
  line L27 (-12.75, 103.5432) -> (-28.546, 76.1837) projected
  line L28 (-28.546, 76.1837) -> (-35.5175, 80.2087) projected
  line L29 (-35.5175, 80.2087) -> (-40.2293, 72.0477) projected
  line L30 (-40.2293, 72.0477) -> (-25.2195, 46.05) projected
  line L31 (-25.2195, 46.05) -> (-15.796, 46.05) projected
  line L32 (-15.796, 46.05) -> (-15.796, 54.1) projected
  line L33 (-15.796, 54.1) -> (15.796, 54.1) projected
  line L34 (15.796, 54.1) -> (15.796, 46.05) projected
  line L35 (15.796, 46.05) -> (25.2195, 46.05) projected
  line L36 (25.2195, 46.05) -> (40.2293, 72.0477) projected
  line L37 (-28.546, 76.1837) -> (-15.796, 76.1837)
  point P0 (0, 0)
  point P1 (0, 59.1)
  point P2 (0, 54.1)
  point P3 (-15, 115.7291)
  point P4 (15, 115.7291)
  point P5 (-15, 104.8422)
  point P6 (-15, 99.6461)
  point P7 (15.796, 105.3017)
  point P8 (15.796, 98.2674)
  dimension "d56" = 65
  dimension "d57" = 30
  dimension "d58" = 5
extrude "押し出し3" cut sketch "スケッチ8" against normal through all contours L6 L4 L18 L12 L1 L0 | L0 L1 L12 L13 L5 L3 L17 L21 | L3 L21 L15 L4 L6 | L21 L17 L3 | L3 L17 L15 L21 | L1 L13 L12 | L3 L5 L16 L15 L17 | L21 L20 L19 L36 L35 L34 L15 | L13 L14 L5 L1 | L18 L37 L12 | L5 L1 L2 L3 | L15 L16 L17
fillet "フィレット4" radius 5 6 edges at (-15.796, 2.25, -46.05) (-25.2195, 2.25, -46.05) (-40.2293, 2.25, -72.0477) (-35.5175, 2.25, -80.2087) (-28.546, 2.25, -76.1837) (-15.796, 2.25, -76.1837)
equation "\"d3\" = d2"
equation "\"d7\" = d4"
equation "\"d19\" = d18"
equation "\"d21\" = Thickness"
equation "\"d28\" = Thickness"
equation "\"d30\" = Thickness"
equation "\"d33\" = d32"
equation "\"d34\" = d32"
equation "\"d35\" = d32"
equation "\"d36\" = d32"
equation "\"d37\" = d32"
equation "\"d38\" = d32"
equation "\"d39\" = d32"
equation "\"d40\" = d32"
equation "\"d41\" = Thickness"
equation "\"d45\" = d44"
equation "\"d46\" = d44"
equation "\"d47\" = d44"
equation "\"d48\" = d44"
equation "\"d49\" = d44"
equation "\"d50\" = d44"
equation "\"d51\" = d44"
equation "\"d16\" = Thickness"
equation "\"BendRadius\" = Thickness"
equation "\"BendReliefWidth\" = Thickness"
equation "\"BendReliefDepth\" = 0.5 * Thickness"
equation "\"CornerReliefSize\" = 4 * Thickness"
equation "\"MinimumRemnant\" = 2 * Thickness"
equation "\"TransitionRadius\" = BendRadius"
equation "\"JacobiRadiusSize\" = BendRadius"
equation "\"GapSize\" = Thickness"
equation "\"Thickness\" = 1.5"
properties part number "CORE_hat_right"
